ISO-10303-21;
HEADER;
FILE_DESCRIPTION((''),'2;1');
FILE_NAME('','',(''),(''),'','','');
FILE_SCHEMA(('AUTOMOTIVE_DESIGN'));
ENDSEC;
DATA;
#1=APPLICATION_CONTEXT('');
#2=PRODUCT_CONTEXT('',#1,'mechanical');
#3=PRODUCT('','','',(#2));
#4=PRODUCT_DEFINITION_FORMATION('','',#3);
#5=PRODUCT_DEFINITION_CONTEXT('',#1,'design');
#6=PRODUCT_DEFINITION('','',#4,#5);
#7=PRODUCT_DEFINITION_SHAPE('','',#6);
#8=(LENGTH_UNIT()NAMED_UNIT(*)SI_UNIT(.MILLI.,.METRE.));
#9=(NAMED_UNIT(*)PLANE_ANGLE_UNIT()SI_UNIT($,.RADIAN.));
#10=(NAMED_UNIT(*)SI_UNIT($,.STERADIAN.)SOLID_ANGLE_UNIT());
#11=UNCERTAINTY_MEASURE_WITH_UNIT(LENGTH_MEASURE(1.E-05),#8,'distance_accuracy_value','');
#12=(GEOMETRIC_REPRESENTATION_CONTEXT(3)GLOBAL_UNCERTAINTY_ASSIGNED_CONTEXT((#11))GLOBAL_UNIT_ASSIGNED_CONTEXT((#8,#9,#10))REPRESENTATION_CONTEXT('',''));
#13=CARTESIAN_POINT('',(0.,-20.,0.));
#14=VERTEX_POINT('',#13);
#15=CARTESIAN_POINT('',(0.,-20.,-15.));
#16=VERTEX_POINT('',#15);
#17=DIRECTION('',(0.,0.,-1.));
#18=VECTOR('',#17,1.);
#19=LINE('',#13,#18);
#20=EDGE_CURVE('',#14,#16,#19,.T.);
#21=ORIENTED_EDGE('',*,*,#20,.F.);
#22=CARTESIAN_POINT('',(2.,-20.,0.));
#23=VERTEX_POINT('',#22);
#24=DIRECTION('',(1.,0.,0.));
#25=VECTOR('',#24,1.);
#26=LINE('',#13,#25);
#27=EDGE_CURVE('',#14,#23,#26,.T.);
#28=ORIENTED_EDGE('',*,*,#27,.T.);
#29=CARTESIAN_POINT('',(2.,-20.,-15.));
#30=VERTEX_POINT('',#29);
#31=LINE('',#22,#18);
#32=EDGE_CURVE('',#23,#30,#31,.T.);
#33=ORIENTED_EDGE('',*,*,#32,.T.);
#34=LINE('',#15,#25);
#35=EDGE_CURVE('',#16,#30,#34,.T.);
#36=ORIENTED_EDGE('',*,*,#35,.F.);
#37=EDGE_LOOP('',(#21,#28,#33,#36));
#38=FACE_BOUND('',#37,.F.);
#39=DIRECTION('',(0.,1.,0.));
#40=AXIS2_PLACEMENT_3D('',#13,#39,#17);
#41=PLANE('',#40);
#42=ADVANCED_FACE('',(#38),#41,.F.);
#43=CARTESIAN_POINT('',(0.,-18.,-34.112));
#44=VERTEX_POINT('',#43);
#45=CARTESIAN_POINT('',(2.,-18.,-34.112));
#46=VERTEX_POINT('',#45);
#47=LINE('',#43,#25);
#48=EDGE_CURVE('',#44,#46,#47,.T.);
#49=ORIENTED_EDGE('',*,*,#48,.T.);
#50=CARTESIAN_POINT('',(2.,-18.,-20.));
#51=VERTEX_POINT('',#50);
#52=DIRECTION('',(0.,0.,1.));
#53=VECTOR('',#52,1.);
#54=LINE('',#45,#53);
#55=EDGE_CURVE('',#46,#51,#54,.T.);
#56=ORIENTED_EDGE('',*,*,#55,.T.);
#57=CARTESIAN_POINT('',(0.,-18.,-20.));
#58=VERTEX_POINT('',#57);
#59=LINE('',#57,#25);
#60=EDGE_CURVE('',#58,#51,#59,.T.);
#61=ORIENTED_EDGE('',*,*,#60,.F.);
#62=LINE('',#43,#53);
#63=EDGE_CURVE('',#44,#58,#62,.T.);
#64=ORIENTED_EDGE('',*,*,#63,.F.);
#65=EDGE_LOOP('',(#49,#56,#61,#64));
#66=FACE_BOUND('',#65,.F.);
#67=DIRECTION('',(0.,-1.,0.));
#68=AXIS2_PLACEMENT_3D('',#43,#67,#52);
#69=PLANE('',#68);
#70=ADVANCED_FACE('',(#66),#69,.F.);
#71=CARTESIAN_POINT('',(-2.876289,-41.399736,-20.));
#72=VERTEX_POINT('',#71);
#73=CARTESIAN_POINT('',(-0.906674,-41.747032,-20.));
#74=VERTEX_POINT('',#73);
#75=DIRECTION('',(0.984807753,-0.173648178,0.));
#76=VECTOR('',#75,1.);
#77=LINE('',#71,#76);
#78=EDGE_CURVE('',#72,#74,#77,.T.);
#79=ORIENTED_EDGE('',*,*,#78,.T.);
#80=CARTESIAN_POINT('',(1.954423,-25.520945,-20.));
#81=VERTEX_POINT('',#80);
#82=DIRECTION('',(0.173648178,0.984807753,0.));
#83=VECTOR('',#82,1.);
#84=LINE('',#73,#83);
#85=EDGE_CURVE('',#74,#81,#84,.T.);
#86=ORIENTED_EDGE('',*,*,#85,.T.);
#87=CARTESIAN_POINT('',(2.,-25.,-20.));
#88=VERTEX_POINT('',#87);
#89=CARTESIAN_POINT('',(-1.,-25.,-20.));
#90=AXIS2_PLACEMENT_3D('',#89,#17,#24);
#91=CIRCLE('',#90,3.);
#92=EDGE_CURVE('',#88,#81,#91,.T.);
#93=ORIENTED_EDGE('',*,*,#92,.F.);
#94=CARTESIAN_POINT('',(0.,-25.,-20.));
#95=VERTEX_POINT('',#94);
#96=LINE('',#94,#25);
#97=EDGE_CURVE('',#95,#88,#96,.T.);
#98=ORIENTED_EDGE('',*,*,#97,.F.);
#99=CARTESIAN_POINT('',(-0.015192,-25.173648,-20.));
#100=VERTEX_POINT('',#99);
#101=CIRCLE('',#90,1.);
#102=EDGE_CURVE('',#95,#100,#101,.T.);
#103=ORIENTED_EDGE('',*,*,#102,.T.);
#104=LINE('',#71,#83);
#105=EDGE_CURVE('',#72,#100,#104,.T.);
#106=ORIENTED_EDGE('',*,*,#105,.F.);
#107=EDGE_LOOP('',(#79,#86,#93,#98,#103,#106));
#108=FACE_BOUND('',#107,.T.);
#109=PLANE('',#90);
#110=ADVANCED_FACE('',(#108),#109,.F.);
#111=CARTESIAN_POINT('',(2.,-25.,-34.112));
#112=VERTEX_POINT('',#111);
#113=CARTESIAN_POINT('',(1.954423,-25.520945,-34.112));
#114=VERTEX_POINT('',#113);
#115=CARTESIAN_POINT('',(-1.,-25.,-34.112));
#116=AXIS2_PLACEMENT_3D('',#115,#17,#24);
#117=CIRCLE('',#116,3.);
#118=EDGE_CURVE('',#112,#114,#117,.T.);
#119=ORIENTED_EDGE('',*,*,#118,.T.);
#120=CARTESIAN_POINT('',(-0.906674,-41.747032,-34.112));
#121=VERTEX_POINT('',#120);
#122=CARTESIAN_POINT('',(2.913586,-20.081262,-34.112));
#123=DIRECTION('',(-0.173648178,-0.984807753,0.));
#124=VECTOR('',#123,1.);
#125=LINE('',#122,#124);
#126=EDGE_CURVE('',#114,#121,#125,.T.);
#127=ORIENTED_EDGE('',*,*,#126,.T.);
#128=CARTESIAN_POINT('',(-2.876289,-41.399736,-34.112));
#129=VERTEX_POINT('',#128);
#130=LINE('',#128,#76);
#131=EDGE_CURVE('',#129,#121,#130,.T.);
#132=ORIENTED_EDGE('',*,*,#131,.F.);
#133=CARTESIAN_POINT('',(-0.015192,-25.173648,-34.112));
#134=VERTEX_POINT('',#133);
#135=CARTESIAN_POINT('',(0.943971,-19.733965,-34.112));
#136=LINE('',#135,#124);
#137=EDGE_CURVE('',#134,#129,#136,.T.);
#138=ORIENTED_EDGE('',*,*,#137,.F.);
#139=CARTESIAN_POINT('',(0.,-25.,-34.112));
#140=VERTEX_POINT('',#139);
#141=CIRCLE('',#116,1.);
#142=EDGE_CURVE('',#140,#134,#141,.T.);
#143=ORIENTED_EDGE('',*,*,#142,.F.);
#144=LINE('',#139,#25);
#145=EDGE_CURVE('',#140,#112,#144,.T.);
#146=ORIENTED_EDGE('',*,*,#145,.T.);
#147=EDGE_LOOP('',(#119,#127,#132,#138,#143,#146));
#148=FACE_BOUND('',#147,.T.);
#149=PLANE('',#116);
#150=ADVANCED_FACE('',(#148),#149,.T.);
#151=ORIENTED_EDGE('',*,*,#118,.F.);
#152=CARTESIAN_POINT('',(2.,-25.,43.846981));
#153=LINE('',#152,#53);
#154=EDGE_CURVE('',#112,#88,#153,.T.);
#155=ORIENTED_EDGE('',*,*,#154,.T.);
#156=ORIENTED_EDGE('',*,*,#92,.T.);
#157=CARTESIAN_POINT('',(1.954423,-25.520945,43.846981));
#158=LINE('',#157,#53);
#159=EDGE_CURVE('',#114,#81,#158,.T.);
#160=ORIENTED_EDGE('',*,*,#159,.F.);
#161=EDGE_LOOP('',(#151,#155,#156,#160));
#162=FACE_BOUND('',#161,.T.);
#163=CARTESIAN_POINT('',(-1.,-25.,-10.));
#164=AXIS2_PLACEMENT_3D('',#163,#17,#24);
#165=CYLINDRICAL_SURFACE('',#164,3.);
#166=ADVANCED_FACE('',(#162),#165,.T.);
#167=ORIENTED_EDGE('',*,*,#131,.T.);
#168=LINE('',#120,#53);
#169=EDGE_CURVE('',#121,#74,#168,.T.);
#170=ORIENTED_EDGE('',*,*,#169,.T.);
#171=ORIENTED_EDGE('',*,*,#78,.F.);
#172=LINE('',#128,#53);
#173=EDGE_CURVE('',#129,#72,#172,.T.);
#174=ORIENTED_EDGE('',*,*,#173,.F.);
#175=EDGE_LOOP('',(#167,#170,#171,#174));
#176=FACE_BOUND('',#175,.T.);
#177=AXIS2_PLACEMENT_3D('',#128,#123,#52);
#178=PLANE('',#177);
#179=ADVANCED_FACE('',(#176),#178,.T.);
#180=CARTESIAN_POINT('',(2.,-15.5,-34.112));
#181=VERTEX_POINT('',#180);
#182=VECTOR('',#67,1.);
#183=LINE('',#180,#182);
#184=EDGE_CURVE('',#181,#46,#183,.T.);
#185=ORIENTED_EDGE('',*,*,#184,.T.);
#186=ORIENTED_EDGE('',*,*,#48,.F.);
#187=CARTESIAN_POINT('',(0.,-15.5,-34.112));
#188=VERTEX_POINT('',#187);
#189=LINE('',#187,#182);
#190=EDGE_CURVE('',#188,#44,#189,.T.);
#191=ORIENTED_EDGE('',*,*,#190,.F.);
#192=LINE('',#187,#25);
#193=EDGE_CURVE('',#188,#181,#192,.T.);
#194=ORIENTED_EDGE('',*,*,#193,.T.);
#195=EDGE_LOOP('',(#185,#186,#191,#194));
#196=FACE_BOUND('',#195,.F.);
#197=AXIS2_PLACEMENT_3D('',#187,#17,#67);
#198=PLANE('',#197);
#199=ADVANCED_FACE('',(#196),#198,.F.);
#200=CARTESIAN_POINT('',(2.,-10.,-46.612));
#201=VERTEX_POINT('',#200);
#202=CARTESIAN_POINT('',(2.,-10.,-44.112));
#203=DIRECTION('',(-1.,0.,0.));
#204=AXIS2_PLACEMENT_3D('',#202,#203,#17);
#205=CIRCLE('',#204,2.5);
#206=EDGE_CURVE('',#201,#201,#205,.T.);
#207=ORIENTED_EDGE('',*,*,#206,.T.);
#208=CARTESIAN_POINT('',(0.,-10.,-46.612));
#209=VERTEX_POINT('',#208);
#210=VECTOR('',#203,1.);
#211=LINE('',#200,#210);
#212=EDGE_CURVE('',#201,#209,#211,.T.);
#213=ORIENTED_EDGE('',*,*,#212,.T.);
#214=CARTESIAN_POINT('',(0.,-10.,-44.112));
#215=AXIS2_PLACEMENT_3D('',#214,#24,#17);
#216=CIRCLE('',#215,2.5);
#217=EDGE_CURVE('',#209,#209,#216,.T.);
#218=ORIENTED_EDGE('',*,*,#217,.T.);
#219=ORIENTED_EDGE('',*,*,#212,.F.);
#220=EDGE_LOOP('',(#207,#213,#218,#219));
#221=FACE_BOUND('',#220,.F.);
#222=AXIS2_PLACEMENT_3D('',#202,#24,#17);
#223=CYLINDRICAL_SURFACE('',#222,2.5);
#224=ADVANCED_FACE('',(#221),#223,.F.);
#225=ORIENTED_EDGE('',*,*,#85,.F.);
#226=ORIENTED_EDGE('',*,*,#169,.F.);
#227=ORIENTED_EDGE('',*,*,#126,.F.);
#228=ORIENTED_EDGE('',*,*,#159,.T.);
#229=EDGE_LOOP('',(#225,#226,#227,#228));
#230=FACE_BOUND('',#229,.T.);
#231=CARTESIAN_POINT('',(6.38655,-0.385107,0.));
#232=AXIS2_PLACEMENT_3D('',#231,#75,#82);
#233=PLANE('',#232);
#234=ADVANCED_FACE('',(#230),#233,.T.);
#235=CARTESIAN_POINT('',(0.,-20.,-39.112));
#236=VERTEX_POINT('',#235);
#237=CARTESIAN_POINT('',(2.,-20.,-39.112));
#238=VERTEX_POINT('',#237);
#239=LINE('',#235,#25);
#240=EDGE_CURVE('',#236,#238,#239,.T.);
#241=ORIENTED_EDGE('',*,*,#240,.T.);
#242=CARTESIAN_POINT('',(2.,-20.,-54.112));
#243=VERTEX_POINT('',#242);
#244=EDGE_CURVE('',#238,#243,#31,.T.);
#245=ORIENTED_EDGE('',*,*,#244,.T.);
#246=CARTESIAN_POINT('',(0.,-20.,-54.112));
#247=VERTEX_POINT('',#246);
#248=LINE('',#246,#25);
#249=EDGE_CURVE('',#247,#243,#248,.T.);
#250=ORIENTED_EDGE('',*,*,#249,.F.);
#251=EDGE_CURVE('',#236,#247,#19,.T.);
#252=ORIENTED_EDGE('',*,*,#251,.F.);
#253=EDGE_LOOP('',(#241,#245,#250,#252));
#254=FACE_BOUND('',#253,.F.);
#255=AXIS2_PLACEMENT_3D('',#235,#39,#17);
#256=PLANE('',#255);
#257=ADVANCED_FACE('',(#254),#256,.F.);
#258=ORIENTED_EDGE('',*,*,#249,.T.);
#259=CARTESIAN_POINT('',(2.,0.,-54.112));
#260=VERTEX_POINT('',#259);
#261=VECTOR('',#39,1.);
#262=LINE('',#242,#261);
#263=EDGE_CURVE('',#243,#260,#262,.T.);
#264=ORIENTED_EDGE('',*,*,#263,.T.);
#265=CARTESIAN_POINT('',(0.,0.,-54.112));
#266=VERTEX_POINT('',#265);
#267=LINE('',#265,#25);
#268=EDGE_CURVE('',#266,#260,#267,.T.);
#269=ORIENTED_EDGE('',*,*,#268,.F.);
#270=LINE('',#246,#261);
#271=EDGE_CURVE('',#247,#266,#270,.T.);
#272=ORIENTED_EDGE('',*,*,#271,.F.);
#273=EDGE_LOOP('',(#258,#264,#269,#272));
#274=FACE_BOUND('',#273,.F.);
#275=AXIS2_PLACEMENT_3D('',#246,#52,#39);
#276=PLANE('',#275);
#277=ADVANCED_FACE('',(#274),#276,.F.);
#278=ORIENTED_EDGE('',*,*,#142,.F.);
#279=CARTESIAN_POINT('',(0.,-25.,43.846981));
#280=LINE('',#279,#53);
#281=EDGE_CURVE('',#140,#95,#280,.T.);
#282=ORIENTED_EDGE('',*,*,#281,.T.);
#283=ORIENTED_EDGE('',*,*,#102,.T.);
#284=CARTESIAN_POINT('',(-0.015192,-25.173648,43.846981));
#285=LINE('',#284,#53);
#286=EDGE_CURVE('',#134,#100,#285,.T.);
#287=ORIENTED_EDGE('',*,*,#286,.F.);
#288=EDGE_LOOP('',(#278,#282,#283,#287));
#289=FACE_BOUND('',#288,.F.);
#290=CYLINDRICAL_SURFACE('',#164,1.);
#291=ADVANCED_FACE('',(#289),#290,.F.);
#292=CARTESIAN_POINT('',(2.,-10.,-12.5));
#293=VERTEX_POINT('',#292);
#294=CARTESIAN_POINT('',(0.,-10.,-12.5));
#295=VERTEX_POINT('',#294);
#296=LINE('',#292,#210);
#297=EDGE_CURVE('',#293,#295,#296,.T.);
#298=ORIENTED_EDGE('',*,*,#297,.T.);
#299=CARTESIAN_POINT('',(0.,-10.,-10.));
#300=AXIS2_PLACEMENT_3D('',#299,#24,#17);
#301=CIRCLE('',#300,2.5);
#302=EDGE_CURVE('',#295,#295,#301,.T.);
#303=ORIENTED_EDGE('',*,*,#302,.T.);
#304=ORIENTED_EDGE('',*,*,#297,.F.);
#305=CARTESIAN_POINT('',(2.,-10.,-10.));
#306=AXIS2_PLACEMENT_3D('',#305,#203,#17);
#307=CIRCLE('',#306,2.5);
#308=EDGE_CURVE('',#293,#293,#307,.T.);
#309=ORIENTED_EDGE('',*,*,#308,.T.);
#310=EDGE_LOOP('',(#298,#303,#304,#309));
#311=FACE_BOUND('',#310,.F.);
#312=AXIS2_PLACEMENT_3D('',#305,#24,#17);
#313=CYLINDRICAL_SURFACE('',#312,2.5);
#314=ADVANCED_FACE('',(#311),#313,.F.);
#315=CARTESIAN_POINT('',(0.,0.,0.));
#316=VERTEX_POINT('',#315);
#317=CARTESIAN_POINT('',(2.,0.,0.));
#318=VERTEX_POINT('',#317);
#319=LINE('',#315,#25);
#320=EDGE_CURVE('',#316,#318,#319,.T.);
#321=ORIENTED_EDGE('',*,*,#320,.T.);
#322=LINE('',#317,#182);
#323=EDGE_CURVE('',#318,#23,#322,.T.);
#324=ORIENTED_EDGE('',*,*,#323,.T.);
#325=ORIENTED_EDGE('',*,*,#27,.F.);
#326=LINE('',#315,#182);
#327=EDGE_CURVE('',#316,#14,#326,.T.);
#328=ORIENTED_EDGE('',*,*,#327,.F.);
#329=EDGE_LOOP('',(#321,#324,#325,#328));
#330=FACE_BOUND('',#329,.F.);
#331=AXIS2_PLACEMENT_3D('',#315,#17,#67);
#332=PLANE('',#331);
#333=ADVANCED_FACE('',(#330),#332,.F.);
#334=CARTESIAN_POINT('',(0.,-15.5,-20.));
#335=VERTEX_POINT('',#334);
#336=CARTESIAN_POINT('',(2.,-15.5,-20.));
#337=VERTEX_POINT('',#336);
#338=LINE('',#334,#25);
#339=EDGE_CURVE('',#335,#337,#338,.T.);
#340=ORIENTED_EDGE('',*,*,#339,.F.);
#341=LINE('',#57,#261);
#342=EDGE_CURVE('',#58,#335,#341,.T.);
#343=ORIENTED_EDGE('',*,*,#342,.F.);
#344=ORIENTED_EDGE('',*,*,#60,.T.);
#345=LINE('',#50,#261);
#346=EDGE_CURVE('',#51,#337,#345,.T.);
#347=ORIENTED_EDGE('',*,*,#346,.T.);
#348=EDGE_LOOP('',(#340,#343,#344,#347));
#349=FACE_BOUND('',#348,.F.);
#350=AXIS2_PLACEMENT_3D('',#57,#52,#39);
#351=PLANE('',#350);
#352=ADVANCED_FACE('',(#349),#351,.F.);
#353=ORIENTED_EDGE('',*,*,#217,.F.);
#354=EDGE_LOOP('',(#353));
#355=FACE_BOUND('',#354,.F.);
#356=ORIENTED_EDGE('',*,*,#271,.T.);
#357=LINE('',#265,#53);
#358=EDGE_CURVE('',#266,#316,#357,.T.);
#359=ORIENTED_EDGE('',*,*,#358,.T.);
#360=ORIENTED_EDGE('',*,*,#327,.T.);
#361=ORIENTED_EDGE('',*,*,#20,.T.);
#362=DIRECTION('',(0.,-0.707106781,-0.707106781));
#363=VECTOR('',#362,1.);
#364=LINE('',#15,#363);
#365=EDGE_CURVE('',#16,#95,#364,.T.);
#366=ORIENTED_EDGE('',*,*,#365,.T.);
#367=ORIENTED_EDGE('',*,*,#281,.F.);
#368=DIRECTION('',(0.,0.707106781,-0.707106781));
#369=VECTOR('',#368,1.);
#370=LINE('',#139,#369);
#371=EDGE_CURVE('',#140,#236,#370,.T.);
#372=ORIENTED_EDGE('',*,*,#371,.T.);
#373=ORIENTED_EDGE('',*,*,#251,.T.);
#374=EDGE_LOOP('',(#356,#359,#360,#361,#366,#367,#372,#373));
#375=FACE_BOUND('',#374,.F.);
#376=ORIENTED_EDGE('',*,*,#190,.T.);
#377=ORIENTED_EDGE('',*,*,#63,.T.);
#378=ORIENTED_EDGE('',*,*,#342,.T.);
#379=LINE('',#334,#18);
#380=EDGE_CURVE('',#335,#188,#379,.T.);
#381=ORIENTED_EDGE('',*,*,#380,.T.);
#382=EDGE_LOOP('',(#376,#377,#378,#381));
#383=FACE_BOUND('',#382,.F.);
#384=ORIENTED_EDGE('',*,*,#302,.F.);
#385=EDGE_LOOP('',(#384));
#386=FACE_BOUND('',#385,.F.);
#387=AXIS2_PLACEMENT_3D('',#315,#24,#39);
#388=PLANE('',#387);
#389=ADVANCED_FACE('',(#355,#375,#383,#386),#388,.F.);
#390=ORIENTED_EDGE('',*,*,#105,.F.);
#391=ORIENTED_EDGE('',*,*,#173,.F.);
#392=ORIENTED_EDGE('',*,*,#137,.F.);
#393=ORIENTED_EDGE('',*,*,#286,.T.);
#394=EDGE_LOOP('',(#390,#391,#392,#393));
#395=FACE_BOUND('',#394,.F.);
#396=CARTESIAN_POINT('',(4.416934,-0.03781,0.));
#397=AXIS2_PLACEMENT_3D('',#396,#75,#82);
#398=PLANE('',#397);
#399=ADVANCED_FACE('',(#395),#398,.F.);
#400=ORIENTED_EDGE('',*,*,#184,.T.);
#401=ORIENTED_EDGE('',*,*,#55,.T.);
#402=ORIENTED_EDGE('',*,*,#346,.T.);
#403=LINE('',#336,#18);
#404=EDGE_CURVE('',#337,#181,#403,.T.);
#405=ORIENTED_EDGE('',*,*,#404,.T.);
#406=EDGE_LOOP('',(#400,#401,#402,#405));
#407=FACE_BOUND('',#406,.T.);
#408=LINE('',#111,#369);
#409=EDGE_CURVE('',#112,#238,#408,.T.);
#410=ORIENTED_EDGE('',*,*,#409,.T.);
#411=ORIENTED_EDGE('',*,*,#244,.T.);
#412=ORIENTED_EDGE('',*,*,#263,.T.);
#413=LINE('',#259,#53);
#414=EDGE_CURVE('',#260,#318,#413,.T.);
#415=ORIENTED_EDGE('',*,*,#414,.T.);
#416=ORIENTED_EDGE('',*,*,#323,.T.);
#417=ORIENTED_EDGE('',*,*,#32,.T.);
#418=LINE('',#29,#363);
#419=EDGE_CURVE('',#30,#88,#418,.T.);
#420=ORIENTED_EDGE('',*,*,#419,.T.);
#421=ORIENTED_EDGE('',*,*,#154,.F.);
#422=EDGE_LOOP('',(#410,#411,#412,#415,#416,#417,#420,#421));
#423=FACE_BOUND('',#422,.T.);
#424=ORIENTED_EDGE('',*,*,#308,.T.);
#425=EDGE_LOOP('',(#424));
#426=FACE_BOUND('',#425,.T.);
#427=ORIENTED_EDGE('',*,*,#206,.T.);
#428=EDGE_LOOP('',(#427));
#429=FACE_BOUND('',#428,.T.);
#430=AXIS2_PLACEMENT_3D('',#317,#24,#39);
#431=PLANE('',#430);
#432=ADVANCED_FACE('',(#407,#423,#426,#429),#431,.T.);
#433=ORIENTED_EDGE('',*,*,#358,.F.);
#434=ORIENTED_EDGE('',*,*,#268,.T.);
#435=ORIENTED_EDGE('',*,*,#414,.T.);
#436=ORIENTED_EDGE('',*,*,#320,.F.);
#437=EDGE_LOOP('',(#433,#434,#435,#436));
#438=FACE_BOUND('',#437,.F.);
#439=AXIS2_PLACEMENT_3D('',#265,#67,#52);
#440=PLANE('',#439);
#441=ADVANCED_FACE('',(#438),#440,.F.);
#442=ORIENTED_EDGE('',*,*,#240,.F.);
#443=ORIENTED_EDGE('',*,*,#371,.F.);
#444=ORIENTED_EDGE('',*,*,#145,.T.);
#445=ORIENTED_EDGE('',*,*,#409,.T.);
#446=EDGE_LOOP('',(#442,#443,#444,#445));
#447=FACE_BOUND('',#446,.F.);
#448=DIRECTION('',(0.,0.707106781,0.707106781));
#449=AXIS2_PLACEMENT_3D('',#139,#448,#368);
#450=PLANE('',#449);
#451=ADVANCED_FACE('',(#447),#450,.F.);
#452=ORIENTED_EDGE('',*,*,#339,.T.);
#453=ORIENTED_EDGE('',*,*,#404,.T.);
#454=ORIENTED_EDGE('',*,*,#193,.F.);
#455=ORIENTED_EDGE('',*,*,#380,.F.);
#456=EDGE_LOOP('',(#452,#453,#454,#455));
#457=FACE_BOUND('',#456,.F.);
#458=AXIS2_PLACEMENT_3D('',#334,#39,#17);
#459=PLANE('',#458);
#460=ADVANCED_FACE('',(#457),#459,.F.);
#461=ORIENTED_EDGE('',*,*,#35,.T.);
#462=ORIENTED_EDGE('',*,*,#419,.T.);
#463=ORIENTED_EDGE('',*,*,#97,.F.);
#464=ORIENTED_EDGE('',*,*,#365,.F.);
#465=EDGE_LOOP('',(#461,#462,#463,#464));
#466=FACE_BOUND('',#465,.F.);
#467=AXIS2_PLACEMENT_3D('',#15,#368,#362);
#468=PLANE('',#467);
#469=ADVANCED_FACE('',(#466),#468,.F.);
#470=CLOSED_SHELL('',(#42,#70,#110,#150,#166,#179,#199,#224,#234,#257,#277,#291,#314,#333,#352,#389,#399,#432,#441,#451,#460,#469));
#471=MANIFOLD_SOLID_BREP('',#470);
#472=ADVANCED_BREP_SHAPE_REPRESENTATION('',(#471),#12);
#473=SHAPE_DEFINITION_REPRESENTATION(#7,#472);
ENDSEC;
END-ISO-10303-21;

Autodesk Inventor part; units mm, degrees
ref_plane "YZ Plane" through (0, 0, 0) normal (1, 0, 0) x (0, 1, 0)
ref_plane "XZ Plane" through (0, 0, 0) normal (0, 1, 0) x (-1, 0, 0)
ref_plane "XY Plane" through (0, 0, 0) normal (0, 0, 1) x (1, 0, 0)
sketch "Sketch1" plane through (0, 0, 0) normal (1, 0, 0) x (0, 1, 0)
  line L0 (0, 0) -> (-20, 0)
  line L1 (-20, 0) -> (-20, -54.112)
  line L2 (-20, -54.112) -> (0, -54.112)
  line L3 (0, -54.112) -> (0, 0)
  line L4 (-20, 0) -> (-20, -27.056)
  line L5 (-20, -27.056) -> (-20, -34.112)
  line L6 (-20, -34.112) -> (-42, -34.112)
  line L7 (-42, -34.112) -> (-42, -20)
  line L8 (-42, -20) -> (-20, -20)
  line L9 (-20, -20) -> (-20, -34.112)
  line L10 (-20, -20) -> (-18, -20)
  line L11 (-18, -20) -> (-15.5, -20)
  line L12 (-15.5, -20) -> (-15.5, -34.112)
  line L13 (-15.5, -34.112) -> (-18, -34.112)
  line L14 (-18, -34.112) -> (-18, -20)
  line L15 (-20, -20) -> (-20, -15)
  line L16 (-20, -15) -> (-25, -20)
  line L17 (-20, -34.112) -> (-25, -34.112)
  line L18 (-25, -34.112) -> (-20, -39.112)
  line L19 (-20, -34.112) -> (-20, -39.112)
  dimension "d0" = 20
  dimension "d1" = 54.112
  dimension "d2" = 27.056
  dimension "d3" = 7.056
  dimension "d4" = 22
  dimension "d5" = 14.112
  dimension "d6" = 2
  dimension "d7" = 2.5
  dimension "d8" = 5
  dimension "d9" = 45
  dimension "d10" = 5
extrude "Extrusion1" add sketch "Sketch1" along normal blind 2
sketch "Sketch2" plane through (2, 0, 0) normal (1, 0, 0) x (0, 0, -1)
  line L0 (20, -25) -> (20, -42) projected
  line L1 (34.112, -42) -> (34.112, -25) projected
  line L2 (20, -25) -> (34.112, -25)
  point P0 (0, 0)
bend part "Bend Part1" radius 3 angle 10 line through (2, -25, -20) along (0, 0, -1) centre toward (-1, 0, 0) moving side (0, -1, 0) both sides no
sketch "Sketch3" plane through (2, 0, 0) normal (1, 0, 0) x (0, 0, -1)
  line L0 (0, 0) -> (0, -20) projected
  line L1 (0, 0) -> (10, 0)
  line L2 (10, 0) -> (10, -10)
  line L3 (10, -10) -> (0, -10)
  line L4 (0, -10) -> (0, 0)
  line L5 (54.112, 0) -> (0, 0) projected
  line L6 (54.112, 0) -> (44.112, 0)
  line L7 (44.112, 0) -> (44.112, -10)
  line L8 (44.112, -10) -> (54.112, -10)
  line L9 (54.112, -10) -> (54.112, 0)
  circle A0 centre (10, -10) radius 2.5
  circle A1 centre (44.112, -10) radius 2.5
  dimension "d15" = 10
  dimension "d16" = 10
  dimension "d17" = 10
  dimension "d18" = 10
  dimension "d19" = 5
  dimension "d20" = 5
extrude "Extrusion2" cut sketch "Sketch3" against normal blind 2 contours A0 L2 L3 | L3 L2 A0 | A1 L8 L7 | L7 L8 A1
properties part number "manual_locker_upoper"
